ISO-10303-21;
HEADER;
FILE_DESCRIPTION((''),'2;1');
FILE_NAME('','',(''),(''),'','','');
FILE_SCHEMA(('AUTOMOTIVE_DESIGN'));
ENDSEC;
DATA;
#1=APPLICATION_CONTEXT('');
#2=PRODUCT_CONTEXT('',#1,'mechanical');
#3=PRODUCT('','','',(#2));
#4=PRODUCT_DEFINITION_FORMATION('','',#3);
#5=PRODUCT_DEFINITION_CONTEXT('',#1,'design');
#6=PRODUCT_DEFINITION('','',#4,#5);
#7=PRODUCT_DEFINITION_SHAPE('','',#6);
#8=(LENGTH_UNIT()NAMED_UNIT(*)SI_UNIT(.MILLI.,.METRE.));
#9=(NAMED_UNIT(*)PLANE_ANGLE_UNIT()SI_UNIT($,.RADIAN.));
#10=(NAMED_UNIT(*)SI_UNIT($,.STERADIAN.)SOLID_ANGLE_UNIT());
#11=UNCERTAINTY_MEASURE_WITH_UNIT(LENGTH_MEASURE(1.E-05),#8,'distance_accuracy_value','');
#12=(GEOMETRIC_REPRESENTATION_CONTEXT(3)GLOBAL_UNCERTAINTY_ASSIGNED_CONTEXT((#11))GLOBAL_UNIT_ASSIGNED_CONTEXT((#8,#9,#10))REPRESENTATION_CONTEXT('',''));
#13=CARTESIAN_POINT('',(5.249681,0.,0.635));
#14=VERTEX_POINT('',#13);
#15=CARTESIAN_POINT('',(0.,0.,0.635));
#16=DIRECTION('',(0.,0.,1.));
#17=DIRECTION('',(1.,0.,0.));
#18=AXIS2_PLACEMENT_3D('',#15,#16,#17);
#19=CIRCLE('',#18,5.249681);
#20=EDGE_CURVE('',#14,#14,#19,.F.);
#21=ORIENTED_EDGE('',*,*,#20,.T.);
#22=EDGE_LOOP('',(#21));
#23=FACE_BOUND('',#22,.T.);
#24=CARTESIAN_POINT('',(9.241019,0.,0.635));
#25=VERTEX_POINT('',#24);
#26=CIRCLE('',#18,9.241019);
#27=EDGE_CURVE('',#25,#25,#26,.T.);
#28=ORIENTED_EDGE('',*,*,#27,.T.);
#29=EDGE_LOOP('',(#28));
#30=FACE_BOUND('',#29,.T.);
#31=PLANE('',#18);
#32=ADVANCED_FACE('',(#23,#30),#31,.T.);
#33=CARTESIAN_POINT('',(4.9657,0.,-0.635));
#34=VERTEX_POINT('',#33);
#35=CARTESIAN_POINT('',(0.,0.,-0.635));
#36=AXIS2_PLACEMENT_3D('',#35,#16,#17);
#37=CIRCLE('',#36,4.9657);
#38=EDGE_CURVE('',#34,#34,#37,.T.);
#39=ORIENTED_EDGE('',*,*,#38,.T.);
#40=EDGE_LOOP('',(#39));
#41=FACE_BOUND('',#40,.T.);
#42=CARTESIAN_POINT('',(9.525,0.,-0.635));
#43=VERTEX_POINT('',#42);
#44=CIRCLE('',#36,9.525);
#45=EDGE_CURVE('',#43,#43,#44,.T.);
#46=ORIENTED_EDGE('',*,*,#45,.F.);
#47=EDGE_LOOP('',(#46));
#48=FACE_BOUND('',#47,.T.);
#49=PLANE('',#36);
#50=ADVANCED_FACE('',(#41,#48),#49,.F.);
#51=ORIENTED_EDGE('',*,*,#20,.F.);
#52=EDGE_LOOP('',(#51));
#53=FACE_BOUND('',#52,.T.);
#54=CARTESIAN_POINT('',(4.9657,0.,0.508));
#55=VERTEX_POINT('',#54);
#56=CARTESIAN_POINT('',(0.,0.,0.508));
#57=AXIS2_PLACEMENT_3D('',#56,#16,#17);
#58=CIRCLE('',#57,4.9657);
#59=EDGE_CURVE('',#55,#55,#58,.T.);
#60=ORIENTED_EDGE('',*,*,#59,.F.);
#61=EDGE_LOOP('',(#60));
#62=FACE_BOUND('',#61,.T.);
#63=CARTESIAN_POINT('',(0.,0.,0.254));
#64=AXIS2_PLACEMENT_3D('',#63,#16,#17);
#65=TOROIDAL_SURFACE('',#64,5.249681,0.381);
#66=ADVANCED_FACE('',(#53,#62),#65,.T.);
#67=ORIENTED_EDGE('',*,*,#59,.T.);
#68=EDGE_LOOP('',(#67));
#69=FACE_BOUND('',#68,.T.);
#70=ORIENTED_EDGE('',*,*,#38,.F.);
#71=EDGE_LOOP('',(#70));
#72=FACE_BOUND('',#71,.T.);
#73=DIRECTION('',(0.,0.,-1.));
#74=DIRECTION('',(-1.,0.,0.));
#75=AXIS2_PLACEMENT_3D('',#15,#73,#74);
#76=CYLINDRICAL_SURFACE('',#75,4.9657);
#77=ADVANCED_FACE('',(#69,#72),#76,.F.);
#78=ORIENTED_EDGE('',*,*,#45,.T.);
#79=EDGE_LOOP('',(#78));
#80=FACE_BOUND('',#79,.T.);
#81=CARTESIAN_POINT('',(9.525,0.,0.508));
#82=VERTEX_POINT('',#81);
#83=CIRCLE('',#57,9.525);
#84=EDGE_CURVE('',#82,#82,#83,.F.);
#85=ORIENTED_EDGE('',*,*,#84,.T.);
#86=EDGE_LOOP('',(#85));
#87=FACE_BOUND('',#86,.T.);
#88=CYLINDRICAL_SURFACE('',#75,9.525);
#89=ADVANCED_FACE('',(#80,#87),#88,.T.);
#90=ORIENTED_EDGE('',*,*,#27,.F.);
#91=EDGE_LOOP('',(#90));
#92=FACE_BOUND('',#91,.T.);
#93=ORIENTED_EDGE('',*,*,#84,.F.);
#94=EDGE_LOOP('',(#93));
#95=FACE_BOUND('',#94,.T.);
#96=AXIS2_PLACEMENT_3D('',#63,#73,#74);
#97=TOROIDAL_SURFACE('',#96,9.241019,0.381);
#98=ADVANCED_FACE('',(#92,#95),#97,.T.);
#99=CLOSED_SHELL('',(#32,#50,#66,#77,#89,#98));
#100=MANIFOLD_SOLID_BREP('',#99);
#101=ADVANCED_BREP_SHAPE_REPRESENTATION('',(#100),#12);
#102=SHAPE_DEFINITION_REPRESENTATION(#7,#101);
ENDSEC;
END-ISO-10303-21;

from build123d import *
from OCP.BRepFilletAPI import BRepFilletAPI_MakeChamfer

# Parameters (mm, degrees)
BOSS_EXTRUDE1_START = -0.635
SKETCH3_R           = 9.525
SKETCH3_R_2         = 4.9657
BOSS_EXTRUDE1_DEPTH = 1.27
CHAMFER1_SIZE       = 0.127
CHAMFER1_SIZE2      = 0.073323484
FILLET1_R           = 0.381


with BuildPart() as part:
    # Sketch3 → Boss-Extrude1 (new body)
    with BuildSketch(Plane.XY.offset(BOSS_EXTRUDE1_START)):
        Circle(SKETCH3_R)
        Circle(SKETCH3_R_2, mode=Mode.SUBTRACT)
    extrude(amount=BOSS_EXTRUDE1_DEPTH)

    # Chamfer1: one chamfer whose edges measure the first distance from different faces: ONE call of the kernel's chamfer builder (chamfer() names one face for all edges)
    chamfer1_edges_1 = [part.edges().sort_by_distance(p)[0] for p in [
        (-9.525, 0, 0.635),
    ]]
    chamfer1_side_1 = [part.faces().sort_by_distance(p)[0] for p in [
        (-9.525, 0, 0),
    ]]
    chamfer1_edges_2 = [part.edges().sort_by_distance(p)[0] for p in [
        (-4.9657, 0, 0.635),
    ]]
    chamfer1_side_2 = [part.faces().sort_by_distance(p)[0] for p in [
        (-4.9657, 0, 0),
    ]]
    chamfer1 = BRepFilletAPI_MakeChamfer(part.part.solid().wrapped)
    for e in chamfer1_edges_1:
        chamfer1.Add(CHAMFER1_SIZE, CHAMFER1_SIZE2, e.wrapped, chamfer1_side_1[0].wrapped)  # the first distance lies on this face
    for e in chamfer1_edges_2:
        chamfer1.Add(CHAMFER1_SIZE, CHAMFER1_SIZE2, e.wrapped, chamfer1_side_2[0].wrapped)  # the first distance lies on this face
    add(Compound.cast(chamfer1.Shape()), mode=Mode.REPLACE)

    # Fillet1
    # the kernel refuses this fillet: 0.381 mm, written as the material it takes off along each edge
    with BuildSketch(Plane(origin=(0, 0, 0.635), x_dir=(1, 0, 0), z_dir=(0, -1, 0))) as fillet1_piece_1:
        with BuildLine():
            CenterArc((9.241019367, -0.381), FILLET1_R, 41.810314896, 48.189685104)
            Line((9.241019367, 0), (9.241019367, 0.00762))
            Line((9.241019367, 0.00762), (9.451676516, 0.00762))
            Line((9.451676516, 0.00762), (9.458275629, 0.00381))
            ThreePointArc((9.458275629, 0.00381), (9.494937371, -0.05969), (9.530679613, -0.12192))
            Line((9.530679613, -0.12192), (9.525, -0.127))
        make_face()
    revolve(axis=Axis((0, 0, 0.635), (0, 0, 1)), mode=Mode.SUBTRACT)
    with BuildSketch(Plane(origin=(0, 0, 0.635), x_dir=(1, 0, 0), z_dir=(0, -1, 0))) as fillet1_piece_2:
        with BuildLine():
            CenterArc((5.249680633, -0.381), FILLET1_R, 90, 48.189685104)
            Line((4.9657, -0.127), (4.960020387, -0.12192))
            ThreePointArc((4.960020387, -0.12192), (4.995762629, -0.05969), (5.032424371, 0.00381))
            Line((5.032424371, 0.00381), (5.039023484, 0.00762))
            Line((5.039023484, 0.00762), (5.249680633, 0.00762))
            Line((5.249680633, 0.00762), (5.249680633, 0))
        make_face()
    revolve(axis=Axis((0, 0, 0.635), (0, 0, 1)), mode=Mode.SUBTRACT)


solid = part.part
